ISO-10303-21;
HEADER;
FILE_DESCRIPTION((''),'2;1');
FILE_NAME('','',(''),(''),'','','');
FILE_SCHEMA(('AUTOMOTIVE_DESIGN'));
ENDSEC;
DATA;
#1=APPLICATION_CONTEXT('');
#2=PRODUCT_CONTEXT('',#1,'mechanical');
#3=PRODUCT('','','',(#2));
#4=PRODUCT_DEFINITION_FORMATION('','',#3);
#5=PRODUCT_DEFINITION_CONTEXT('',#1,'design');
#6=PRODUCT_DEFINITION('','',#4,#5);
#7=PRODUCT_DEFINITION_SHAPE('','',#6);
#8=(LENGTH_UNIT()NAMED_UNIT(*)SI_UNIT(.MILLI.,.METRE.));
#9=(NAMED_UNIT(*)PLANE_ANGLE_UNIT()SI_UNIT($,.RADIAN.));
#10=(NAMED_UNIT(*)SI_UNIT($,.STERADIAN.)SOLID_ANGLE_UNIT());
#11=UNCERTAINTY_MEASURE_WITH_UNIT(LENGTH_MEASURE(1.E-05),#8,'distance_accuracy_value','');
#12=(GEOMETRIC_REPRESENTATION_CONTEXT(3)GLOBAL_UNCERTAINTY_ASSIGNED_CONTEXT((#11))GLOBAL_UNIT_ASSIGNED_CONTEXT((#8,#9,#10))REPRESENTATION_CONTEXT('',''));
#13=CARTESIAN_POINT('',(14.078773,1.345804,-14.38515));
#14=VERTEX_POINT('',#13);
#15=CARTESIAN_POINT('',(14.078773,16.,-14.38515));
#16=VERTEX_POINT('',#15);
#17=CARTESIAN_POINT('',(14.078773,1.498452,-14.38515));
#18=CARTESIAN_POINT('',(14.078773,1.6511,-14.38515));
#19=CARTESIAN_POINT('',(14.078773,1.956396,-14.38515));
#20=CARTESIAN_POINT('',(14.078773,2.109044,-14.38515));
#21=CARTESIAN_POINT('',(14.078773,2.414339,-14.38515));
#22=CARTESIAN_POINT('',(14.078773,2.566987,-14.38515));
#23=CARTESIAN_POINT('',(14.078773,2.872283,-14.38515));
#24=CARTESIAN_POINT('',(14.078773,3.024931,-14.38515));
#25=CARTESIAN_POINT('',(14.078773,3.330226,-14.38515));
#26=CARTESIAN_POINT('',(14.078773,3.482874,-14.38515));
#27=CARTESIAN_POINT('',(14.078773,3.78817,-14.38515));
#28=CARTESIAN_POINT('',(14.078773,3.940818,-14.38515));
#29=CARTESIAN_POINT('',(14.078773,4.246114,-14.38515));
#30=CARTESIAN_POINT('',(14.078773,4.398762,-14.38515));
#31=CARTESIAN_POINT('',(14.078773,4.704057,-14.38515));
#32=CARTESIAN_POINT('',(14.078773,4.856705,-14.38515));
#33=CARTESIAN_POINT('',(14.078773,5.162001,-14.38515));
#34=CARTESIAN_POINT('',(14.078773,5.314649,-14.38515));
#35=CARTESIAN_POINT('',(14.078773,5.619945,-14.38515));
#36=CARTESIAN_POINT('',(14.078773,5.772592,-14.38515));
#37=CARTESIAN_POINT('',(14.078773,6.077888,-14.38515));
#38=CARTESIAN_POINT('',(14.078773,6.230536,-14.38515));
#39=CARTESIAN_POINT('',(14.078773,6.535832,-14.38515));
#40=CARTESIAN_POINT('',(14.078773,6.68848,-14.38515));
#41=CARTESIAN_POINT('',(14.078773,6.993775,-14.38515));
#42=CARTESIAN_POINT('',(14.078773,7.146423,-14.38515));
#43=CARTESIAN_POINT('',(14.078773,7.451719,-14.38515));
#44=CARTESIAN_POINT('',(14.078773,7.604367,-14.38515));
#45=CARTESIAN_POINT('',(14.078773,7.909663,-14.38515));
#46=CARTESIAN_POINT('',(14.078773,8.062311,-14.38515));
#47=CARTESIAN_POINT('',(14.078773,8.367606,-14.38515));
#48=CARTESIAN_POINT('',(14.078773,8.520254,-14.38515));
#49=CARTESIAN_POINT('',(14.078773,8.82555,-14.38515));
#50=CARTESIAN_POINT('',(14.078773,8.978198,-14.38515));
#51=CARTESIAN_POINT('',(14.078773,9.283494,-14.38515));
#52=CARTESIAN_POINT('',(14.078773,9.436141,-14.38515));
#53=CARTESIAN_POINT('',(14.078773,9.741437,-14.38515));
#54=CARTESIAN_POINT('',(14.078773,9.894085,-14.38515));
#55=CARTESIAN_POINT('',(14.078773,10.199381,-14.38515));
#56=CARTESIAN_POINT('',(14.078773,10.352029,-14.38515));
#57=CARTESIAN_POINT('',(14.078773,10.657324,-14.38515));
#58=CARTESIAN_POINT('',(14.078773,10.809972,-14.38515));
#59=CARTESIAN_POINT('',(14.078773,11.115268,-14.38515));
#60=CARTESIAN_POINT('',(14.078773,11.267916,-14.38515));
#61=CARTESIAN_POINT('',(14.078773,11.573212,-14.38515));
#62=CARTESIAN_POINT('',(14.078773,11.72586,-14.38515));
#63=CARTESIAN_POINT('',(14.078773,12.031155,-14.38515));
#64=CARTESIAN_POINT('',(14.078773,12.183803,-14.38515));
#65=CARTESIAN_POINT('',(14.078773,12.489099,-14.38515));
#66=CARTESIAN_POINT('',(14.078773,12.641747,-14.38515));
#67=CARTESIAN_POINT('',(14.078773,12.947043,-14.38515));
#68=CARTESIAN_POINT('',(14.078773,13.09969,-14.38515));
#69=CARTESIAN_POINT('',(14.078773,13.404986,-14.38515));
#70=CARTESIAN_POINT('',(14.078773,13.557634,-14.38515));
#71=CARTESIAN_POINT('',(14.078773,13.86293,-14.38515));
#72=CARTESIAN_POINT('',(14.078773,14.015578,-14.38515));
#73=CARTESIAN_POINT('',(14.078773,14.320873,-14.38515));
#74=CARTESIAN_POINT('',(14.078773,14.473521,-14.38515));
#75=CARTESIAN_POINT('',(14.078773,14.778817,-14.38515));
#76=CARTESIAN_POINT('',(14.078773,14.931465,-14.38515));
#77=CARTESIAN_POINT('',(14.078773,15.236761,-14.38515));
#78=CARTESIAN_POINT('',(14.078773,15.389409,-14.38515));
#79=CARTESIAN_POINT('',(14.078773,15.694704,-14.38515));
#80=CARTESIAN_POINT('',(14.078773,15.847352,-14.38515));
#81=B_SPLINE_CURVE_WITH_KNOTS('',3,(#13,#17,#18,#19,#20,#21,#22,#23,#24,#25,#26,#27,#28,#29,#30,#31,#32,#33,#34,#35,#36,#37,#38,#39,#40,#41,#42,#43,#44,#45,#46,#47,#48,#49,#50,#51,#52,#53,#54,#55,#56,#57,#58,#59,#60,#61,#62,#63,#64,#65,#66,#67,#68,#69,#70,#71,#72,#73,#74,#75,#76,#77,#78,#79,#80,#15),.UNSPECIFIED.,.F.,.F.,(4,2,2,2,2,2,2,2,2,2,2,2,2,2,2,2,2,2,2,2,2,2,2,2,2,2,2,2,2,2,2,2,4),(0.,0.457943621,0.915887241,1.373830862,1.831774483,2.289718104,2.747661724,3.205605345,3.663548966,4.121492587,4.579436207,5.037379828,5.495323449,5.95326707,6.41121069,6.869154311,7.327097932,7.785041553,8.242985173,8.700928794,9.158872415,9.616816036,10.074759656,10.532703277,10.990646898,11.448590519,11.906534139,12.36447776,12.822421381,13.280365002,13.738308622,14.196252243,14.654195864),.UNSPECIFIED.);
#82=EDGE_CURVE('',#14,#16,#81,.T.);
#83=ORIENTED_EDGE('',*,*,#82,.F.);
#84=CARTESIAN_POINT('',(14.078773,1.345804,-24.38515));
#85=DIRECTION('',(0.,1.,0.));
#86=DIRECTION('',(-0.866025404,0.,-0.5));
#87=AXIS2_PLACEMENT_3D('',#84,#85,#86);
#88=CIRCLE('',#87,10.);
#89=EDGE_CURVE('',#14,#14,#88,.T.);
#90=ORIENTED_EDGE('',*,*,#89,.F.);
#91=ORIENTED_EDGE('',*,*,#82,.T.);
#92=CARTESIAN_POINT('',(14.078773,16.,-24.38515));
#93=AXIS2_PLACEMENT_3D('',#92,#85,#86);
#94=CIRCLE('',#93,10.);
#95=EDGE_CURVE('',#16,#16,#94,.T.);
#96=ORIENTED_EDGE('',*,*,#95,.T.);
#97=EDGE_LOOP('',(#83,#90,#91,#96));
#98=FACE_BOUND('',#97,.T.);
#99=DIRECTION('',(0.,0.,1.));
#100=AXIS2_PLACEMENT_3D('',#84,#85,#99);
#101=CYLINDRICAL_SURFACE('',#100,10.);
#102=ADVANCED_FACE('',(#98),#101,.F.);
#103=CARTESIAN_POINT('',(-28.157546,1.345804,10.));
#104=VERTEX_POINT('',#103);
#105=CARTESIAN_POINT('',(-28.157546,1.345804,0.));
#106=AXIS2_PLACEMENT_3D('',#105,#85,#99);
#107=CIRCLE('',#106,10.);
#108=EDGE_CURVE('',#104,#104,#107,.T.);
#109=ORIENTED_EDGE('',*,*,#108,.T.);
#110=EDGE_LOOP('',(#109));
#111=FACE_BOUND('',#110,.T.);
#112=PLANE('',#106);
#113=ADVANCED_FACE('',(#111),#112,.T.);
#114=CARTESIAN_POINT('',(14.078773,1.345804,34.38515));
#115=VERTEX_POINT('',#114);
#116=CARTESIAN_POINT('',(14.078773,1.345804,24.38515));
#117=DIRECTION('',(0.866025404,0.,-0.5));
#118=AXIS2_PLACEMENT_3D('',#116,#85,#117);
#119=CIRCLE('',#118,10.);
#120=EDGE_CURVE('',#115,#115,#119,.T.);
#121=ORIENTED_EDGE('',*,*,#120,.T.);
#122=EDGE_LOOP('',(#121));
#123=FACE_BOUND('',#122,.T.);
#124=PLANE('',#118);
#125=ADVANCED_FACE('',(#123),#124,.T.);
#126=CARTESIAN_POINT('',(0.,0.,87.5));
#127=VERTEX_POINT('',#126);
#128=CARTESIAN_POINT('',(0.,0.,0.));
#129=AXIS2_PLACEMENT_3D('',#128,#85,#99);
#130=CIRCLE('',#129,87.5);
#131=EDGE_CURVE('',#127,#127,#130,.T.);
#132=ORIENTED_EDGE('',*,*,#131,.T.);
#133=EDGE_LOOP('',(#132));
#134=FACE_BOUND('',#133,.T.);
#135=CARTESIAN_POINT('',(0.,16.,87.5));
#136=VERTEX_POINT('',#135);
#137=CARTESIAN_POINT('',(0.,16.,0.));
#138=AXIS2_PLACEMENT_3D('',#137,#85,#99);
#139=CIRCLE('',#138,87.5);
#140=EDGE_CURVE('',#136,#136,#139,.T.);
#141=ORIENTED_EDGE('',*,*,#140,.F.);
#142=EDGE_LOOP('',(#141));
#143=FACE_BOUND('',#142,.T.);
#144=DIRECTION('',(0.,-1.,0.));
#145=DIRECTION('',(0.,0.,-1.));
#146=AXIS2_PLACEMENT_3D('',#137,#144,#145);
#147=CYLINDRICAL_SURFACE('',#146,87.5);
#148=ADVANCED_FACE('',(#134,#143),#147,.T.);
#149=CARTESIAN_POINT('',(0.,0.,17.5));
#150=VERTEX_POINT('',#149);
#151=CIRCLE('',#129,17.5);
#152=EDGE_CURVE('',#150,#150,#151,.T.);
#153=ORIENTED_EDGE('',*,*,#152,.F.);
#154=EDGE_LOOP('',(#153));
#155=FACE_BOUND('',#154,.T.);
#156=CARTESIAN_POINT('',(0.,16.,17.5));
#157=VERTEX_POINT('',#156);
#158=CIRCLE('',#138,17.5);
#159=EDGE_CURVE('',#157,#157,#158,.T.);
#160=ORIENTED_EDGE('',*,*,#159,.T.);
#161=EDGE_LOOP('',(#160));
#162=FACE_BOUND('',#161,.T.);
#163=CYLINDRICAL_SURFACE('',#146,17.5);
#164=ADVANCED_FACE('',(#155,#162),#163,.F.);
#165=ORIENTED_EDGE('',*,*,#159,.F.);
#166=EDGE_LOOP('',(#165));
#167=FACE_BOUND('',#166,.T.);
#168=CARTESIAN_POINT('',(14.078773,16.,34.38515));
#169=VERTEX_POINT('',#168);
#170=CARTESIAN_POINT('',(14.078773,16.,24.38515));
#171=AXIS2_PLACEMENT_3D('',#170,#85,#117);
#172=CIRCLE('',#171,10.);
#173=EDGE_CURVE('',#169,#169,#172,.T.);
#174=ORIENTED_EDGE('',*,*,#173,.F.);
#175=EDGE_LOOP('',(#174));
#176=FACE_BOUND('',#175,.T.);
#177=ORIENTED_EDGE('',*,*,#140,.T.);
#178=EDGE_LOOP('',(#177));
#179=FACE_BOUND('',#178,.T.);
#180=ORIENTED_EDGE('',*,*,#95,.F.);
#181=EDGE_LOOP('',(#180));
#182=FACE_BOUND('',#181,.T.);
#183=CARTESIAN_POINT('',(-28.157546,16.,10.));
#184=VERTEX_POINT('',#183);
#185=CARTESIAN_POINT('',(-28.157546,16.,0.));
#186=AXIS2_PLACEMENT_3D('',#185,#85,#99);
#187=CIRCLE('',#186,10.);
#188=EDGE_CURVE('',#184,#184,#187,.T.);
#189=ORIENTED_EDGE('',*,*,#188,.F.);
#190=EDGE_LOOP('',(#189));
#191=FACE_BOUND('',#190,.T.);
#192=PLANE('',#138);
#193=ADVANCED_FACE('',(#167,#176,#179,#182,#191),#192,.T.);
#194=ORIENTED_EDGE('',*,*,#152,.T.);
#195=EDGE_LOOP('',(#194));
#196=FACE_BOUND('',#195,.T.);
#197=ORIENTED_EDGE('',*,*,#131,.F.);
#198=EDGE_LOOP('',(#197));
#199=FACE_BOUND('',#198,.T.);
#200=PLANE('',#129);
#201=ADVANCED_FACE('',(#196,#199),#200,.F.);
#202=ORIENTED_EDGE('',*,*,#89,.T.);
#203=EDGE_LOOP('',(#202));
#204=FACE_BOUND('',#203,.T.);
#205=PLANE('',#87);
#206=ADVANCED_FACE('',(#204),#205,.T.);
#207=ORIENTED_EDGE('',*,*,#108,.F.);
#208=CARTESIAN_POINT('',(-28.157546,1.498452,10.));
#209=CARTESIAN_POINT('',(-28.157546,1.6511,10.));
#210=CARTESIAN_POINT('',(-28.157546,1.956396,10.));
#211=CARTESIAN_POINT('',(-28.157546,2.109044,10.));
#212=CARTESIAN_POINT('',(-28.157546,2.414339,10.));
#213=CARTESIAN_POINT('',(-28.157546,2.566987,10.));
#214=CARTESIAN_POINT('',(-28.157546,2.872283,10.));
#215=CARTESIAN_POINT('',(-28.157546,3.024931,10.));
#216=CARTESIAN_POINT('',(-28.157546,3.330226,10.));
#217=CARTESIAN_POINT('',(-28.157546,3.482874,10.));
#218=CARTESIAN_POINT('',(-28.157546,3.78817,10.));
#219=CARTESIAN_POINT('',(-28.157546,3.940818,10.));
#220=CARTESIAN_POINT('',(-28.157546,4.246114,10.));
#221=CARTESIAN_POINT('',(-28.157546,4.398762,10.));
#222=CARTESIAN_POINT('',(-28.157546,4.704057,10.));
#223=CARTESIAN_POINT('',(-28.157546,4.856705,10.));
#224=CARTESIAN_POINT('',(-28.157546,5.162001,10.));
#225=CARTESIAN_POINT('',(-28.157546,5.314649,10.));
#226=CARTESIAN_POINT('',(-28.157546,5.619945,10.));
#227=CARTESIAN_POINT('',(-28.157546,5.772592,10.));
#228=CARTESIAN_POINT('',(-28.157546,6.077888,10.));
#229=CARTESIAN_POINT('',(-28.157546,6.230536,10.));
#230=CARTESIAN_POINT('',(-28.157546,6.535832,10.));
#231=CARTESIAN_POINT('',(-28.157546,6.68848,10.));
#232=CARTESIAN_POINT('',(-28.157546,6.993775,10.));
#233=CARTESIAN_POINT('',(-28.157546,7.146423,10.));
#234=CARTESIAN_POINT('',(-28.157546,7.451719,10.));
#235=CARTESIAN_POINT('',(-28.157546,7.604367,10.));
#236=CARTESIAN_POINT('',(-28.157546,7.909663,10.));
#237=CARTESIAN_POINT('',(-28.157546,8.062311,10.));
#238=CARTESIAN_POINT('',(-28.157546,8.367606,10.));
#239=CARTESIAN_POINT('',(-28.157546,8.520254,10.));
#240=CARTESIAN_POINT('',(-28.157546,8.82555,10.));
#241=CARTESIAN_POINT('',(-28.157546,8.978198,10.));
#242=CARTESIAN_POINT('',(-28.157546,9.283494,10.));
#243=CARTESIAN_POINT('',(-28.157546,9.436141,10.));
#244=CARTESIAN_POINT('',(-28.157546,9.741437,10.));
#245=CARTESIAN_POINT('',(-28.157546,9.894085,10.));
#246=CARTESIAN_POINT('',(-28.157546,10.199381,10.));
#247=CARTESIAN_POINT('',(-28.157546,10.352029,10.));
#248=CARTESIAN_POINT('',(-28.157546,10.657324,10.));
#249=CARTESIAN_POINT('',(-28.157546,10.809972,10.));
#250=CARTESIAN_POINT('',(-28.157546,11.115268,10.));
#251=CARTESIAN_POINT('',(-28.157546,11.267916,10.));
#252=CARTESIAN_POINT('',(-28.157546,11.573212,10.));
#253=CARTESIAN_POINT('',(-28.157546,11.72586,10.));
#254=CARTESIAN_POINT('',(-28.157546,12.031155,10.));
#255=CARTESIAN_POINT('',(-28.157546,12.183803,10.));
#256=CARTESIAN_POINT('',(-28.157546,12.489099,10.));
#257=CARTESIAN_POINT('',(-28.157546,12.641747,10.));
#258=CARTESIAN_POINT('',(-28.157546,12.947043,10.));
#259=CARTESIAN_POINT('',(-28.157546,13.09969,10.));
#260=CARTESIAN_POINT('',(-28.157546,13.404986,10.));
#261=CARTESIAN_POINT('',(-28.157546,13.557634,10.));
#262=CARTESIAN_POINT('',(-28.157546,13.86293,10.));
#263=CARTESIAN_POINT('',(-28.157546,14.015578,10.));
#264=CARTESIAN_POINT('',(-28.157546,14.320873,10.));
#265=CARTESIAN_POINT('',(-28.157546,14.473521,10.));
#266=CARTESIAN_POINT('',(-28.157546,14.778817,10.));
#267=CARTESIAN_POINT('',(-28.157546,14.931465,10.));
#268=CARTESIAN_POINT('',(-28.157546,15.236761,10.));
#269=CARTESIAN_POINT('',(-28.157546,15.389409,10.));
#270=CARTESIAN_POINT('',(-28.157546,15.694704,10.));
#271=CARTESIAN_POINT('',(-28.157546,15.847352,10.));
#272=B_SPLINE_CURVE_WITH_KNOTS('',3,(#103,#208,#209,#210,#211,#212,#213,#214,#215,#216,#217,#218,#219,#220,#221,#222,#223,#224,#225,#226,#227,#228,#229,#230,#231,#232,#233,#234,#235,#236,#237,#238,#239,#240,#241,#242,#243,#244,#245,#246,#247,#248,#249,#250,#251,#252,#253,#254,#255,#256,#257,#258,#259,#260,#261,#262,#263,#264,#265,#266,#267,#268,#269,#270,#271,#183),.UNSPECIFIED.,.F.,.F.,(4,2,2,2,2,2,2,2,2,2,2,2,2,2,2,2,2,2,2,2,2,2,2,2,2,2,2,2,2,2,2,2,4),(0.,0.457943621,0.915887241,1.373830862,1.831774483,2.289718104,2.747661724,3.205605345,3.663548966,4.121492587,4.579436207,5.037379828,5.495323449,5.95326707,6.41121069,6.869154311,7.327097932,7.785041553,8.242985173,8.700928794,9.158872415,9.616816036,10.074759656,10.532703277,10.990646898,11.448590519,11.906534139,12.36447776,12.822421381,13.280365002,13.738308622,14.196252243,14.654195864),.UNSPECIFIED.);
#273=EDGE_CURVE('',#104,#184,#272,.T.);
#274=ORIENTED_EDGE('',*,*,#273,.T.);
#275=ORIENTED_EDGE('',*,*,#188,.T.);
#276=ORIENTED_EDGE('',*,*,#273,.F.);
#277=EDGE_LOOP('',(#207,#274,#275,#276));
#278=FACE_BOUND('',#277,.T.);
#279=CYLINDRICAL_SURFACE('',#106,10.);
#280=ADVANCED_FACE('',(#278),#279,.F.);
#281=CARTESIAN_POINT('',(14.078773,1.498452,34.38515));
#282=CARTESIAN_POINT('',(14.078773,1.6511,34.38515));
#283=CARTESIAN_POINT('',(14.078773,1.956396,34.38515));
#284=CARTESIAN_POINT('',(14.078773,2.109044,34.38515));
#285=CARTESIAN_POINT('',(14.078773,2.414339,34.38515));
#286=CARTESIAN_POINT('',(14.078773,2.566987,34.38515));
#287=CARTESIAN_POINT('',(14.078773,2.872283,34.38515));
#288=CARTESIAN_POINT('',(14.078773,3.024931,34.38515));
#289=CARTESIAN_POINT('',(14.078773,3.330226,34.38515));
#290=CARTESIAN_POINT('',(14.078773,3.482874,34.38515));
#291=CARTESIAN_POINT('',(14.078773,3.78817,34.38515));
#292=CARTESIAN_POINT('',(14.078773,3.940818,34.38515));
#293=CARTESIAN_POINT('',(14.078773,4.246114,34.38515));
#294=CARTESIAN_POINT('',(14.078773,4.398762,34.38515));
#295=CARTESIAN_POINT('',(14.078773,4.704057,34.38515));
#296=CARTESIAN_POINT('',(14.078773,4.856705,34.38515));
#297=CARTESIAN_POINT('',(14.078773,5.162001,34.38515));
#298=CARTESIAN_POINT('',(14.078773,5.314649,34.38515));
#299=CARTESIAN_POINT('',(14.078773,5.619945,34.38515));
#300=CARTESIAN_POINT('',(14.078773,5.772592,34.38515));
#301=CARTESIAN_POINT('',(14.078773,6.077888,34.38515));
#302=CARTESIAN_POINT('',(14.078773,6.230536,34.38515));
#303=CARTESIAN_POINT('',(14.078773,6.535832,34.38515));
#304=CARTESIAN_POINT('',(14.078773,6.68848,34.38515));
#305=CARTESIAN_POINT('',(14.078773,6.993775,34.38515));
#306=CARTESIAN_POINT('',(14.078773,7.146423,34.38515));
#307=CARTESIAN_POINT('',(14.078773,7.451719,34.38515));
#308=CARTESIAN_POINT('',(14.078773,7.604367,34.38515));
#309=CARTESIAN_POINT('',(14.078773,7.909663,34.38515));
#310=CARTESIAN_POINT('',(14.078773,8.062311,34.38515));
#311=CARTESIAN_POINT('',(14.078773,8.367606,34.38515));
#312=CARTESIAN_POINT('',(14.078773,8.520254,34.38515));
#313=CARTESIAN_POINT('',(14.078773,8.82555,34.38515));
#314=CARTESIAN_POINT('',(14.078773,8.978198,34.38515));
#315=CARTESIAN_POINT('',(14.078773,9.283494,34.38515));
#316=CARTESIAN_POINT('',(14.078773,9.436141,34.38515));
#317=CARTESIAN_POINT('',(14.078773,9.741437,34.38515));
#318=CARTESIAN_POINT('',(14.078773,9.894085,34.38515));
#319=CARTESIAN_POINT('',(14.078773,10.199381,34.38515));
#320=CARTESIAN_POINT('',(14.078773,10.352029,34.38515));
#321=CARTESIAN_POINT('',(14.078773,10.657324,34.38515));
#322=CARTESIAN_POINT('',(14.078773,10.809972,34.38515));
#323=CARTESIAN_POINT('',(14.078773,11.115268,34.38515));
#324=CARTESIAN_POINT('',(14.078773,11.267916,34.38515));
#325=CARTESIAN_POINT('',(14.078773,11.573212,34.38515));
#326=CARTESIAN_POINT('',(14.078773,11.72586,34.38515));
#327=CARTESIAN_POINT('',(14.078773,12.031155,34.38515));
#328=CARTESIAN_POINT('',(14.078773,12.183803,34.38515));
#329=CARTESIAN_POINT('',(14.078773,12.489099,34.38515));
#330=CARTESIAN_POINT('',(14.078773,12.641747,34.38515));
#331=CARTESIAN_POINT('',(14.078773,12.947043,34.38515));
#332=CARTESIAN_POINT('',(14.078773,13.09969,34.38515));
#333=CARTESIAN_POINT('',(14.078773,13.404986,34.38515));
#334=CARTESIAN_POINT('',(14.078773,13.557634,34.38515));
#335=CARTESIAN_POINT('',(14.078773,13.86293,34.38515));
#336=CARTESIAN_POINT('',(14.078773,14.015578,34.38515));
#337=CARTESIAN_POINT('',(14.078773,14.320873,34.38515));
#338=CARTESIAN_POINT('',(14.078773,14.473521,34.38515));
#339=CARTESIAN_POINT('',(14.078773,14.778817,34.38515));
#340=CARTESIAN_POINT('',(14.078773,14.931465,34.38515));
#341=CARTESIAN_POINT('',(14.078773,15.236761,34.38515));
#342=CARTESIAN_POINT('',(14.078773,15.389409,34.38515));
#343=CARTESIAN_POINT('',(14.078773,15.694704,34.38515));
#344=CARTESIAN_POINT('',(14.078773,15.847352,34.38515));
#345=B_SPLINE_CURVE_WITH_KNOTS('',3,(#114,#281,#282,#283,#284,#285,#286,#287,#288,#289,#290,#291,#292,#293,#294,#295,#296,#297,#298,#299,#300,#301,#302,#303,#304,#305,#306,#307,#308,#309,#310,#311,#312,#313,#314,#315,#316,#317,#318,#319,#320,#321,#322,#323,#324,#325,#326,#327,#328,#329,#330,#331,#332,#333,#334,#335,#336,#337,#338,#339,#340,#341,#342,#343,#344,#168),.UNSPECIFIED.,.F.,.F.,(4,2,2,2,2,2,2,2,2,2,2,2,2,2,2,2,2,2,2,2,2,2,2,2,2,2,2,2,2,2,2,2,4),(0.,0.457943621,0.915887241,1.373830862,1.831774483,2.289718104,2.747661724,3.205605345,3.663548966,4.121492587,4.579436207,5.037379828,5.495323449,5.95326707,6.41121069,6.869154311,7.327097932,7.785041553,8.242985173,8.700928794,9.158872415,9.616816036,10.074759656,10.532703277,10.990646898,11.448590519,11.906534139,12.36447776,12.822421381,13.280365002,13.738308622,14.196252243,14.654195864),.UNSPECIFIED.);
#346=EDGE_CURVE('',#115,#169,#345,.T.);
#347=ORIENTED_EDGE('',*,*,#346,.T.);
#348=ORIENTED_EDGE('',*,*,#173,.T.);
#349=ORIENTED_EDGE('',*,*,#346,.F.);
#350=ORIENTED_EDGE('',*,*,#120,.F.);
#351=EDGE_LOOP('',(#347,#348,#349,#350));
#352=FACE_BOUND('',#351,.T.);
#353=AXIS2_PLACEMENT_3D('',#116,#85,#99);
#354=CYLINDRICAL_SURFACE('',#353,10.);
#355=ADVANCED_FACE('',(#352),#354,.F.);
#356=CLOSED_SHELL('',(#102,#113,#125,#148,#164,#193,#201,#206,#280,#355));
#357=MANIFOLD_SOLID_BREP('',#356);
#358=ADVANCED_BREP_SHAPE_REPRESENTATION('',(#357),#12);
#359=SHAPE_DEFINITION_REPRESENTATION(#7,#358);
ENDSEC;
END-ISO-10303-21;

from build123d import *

# Parameters (mm, degrees)
SKETCH1_R           = 87.5
BOSS_EXTRUDE1_DEPTH = 16
SKETCH2_R           = 17.5
CUT_EXTRUDE1_DEPTH  = 125.773795326
SKETCH3_R           = 10
CUT_EXTRUDE2_DEPTH  = 14.654195864
CIRPATTERN1_COUNT   = 3


with BuildPart() as part:
    # Sketch1 → Boss-Extrude1 (new body)
    with BuildSketch(Plane(origin=(0, 0, 0), x_dir=(1, 0, 0), z_dir=(0, 1, 0))):
        Circle(SKETCH1_R)
    extrude(amount=BOSS_EXTRUDE1_DEPTH)

    # Sketch2 → Cut-Extrude1 (cut, through all)
    with BuildSketch(Plane(origin=(0, 0, 0), x_dir=(1, 0, 0), z_dir=(0, 1, 0))):
        Circle(SKETCH2_R)
    extrude(amount=CUT_EXTRUDE1_DEPTH, mode=Mode.SUBTRACT)

    # Sketch3 → Cut-Extrude2 (cut)
    with BuildSketch(Plane(origin=(0, 16, 0), x_dir=(1, 0, 0), z_dir=(0, 1, 0))):
        with Locations((-28.157545584, 0)):
            Circle(SKETCH3_R)
    cut_extrude2 = extrude(amount=-CUT_EXTRUDE2_DEPTH, mode=Mode.SUBTRACT)

    # CirPattern1: Cut-Extrude2 ×3 about axis
    cirpattern1_axis = Axis((0, 0, 0), (0, 1, 0))
    for i in range(1, CIRPATTERN1_COUNT):
        add(cut_extrude2.rotate(cirpattern1_axis, i * 360 / CIRPATTERN1_COUNT), mode=Mode.SUBTRACT)


solid = part.part
